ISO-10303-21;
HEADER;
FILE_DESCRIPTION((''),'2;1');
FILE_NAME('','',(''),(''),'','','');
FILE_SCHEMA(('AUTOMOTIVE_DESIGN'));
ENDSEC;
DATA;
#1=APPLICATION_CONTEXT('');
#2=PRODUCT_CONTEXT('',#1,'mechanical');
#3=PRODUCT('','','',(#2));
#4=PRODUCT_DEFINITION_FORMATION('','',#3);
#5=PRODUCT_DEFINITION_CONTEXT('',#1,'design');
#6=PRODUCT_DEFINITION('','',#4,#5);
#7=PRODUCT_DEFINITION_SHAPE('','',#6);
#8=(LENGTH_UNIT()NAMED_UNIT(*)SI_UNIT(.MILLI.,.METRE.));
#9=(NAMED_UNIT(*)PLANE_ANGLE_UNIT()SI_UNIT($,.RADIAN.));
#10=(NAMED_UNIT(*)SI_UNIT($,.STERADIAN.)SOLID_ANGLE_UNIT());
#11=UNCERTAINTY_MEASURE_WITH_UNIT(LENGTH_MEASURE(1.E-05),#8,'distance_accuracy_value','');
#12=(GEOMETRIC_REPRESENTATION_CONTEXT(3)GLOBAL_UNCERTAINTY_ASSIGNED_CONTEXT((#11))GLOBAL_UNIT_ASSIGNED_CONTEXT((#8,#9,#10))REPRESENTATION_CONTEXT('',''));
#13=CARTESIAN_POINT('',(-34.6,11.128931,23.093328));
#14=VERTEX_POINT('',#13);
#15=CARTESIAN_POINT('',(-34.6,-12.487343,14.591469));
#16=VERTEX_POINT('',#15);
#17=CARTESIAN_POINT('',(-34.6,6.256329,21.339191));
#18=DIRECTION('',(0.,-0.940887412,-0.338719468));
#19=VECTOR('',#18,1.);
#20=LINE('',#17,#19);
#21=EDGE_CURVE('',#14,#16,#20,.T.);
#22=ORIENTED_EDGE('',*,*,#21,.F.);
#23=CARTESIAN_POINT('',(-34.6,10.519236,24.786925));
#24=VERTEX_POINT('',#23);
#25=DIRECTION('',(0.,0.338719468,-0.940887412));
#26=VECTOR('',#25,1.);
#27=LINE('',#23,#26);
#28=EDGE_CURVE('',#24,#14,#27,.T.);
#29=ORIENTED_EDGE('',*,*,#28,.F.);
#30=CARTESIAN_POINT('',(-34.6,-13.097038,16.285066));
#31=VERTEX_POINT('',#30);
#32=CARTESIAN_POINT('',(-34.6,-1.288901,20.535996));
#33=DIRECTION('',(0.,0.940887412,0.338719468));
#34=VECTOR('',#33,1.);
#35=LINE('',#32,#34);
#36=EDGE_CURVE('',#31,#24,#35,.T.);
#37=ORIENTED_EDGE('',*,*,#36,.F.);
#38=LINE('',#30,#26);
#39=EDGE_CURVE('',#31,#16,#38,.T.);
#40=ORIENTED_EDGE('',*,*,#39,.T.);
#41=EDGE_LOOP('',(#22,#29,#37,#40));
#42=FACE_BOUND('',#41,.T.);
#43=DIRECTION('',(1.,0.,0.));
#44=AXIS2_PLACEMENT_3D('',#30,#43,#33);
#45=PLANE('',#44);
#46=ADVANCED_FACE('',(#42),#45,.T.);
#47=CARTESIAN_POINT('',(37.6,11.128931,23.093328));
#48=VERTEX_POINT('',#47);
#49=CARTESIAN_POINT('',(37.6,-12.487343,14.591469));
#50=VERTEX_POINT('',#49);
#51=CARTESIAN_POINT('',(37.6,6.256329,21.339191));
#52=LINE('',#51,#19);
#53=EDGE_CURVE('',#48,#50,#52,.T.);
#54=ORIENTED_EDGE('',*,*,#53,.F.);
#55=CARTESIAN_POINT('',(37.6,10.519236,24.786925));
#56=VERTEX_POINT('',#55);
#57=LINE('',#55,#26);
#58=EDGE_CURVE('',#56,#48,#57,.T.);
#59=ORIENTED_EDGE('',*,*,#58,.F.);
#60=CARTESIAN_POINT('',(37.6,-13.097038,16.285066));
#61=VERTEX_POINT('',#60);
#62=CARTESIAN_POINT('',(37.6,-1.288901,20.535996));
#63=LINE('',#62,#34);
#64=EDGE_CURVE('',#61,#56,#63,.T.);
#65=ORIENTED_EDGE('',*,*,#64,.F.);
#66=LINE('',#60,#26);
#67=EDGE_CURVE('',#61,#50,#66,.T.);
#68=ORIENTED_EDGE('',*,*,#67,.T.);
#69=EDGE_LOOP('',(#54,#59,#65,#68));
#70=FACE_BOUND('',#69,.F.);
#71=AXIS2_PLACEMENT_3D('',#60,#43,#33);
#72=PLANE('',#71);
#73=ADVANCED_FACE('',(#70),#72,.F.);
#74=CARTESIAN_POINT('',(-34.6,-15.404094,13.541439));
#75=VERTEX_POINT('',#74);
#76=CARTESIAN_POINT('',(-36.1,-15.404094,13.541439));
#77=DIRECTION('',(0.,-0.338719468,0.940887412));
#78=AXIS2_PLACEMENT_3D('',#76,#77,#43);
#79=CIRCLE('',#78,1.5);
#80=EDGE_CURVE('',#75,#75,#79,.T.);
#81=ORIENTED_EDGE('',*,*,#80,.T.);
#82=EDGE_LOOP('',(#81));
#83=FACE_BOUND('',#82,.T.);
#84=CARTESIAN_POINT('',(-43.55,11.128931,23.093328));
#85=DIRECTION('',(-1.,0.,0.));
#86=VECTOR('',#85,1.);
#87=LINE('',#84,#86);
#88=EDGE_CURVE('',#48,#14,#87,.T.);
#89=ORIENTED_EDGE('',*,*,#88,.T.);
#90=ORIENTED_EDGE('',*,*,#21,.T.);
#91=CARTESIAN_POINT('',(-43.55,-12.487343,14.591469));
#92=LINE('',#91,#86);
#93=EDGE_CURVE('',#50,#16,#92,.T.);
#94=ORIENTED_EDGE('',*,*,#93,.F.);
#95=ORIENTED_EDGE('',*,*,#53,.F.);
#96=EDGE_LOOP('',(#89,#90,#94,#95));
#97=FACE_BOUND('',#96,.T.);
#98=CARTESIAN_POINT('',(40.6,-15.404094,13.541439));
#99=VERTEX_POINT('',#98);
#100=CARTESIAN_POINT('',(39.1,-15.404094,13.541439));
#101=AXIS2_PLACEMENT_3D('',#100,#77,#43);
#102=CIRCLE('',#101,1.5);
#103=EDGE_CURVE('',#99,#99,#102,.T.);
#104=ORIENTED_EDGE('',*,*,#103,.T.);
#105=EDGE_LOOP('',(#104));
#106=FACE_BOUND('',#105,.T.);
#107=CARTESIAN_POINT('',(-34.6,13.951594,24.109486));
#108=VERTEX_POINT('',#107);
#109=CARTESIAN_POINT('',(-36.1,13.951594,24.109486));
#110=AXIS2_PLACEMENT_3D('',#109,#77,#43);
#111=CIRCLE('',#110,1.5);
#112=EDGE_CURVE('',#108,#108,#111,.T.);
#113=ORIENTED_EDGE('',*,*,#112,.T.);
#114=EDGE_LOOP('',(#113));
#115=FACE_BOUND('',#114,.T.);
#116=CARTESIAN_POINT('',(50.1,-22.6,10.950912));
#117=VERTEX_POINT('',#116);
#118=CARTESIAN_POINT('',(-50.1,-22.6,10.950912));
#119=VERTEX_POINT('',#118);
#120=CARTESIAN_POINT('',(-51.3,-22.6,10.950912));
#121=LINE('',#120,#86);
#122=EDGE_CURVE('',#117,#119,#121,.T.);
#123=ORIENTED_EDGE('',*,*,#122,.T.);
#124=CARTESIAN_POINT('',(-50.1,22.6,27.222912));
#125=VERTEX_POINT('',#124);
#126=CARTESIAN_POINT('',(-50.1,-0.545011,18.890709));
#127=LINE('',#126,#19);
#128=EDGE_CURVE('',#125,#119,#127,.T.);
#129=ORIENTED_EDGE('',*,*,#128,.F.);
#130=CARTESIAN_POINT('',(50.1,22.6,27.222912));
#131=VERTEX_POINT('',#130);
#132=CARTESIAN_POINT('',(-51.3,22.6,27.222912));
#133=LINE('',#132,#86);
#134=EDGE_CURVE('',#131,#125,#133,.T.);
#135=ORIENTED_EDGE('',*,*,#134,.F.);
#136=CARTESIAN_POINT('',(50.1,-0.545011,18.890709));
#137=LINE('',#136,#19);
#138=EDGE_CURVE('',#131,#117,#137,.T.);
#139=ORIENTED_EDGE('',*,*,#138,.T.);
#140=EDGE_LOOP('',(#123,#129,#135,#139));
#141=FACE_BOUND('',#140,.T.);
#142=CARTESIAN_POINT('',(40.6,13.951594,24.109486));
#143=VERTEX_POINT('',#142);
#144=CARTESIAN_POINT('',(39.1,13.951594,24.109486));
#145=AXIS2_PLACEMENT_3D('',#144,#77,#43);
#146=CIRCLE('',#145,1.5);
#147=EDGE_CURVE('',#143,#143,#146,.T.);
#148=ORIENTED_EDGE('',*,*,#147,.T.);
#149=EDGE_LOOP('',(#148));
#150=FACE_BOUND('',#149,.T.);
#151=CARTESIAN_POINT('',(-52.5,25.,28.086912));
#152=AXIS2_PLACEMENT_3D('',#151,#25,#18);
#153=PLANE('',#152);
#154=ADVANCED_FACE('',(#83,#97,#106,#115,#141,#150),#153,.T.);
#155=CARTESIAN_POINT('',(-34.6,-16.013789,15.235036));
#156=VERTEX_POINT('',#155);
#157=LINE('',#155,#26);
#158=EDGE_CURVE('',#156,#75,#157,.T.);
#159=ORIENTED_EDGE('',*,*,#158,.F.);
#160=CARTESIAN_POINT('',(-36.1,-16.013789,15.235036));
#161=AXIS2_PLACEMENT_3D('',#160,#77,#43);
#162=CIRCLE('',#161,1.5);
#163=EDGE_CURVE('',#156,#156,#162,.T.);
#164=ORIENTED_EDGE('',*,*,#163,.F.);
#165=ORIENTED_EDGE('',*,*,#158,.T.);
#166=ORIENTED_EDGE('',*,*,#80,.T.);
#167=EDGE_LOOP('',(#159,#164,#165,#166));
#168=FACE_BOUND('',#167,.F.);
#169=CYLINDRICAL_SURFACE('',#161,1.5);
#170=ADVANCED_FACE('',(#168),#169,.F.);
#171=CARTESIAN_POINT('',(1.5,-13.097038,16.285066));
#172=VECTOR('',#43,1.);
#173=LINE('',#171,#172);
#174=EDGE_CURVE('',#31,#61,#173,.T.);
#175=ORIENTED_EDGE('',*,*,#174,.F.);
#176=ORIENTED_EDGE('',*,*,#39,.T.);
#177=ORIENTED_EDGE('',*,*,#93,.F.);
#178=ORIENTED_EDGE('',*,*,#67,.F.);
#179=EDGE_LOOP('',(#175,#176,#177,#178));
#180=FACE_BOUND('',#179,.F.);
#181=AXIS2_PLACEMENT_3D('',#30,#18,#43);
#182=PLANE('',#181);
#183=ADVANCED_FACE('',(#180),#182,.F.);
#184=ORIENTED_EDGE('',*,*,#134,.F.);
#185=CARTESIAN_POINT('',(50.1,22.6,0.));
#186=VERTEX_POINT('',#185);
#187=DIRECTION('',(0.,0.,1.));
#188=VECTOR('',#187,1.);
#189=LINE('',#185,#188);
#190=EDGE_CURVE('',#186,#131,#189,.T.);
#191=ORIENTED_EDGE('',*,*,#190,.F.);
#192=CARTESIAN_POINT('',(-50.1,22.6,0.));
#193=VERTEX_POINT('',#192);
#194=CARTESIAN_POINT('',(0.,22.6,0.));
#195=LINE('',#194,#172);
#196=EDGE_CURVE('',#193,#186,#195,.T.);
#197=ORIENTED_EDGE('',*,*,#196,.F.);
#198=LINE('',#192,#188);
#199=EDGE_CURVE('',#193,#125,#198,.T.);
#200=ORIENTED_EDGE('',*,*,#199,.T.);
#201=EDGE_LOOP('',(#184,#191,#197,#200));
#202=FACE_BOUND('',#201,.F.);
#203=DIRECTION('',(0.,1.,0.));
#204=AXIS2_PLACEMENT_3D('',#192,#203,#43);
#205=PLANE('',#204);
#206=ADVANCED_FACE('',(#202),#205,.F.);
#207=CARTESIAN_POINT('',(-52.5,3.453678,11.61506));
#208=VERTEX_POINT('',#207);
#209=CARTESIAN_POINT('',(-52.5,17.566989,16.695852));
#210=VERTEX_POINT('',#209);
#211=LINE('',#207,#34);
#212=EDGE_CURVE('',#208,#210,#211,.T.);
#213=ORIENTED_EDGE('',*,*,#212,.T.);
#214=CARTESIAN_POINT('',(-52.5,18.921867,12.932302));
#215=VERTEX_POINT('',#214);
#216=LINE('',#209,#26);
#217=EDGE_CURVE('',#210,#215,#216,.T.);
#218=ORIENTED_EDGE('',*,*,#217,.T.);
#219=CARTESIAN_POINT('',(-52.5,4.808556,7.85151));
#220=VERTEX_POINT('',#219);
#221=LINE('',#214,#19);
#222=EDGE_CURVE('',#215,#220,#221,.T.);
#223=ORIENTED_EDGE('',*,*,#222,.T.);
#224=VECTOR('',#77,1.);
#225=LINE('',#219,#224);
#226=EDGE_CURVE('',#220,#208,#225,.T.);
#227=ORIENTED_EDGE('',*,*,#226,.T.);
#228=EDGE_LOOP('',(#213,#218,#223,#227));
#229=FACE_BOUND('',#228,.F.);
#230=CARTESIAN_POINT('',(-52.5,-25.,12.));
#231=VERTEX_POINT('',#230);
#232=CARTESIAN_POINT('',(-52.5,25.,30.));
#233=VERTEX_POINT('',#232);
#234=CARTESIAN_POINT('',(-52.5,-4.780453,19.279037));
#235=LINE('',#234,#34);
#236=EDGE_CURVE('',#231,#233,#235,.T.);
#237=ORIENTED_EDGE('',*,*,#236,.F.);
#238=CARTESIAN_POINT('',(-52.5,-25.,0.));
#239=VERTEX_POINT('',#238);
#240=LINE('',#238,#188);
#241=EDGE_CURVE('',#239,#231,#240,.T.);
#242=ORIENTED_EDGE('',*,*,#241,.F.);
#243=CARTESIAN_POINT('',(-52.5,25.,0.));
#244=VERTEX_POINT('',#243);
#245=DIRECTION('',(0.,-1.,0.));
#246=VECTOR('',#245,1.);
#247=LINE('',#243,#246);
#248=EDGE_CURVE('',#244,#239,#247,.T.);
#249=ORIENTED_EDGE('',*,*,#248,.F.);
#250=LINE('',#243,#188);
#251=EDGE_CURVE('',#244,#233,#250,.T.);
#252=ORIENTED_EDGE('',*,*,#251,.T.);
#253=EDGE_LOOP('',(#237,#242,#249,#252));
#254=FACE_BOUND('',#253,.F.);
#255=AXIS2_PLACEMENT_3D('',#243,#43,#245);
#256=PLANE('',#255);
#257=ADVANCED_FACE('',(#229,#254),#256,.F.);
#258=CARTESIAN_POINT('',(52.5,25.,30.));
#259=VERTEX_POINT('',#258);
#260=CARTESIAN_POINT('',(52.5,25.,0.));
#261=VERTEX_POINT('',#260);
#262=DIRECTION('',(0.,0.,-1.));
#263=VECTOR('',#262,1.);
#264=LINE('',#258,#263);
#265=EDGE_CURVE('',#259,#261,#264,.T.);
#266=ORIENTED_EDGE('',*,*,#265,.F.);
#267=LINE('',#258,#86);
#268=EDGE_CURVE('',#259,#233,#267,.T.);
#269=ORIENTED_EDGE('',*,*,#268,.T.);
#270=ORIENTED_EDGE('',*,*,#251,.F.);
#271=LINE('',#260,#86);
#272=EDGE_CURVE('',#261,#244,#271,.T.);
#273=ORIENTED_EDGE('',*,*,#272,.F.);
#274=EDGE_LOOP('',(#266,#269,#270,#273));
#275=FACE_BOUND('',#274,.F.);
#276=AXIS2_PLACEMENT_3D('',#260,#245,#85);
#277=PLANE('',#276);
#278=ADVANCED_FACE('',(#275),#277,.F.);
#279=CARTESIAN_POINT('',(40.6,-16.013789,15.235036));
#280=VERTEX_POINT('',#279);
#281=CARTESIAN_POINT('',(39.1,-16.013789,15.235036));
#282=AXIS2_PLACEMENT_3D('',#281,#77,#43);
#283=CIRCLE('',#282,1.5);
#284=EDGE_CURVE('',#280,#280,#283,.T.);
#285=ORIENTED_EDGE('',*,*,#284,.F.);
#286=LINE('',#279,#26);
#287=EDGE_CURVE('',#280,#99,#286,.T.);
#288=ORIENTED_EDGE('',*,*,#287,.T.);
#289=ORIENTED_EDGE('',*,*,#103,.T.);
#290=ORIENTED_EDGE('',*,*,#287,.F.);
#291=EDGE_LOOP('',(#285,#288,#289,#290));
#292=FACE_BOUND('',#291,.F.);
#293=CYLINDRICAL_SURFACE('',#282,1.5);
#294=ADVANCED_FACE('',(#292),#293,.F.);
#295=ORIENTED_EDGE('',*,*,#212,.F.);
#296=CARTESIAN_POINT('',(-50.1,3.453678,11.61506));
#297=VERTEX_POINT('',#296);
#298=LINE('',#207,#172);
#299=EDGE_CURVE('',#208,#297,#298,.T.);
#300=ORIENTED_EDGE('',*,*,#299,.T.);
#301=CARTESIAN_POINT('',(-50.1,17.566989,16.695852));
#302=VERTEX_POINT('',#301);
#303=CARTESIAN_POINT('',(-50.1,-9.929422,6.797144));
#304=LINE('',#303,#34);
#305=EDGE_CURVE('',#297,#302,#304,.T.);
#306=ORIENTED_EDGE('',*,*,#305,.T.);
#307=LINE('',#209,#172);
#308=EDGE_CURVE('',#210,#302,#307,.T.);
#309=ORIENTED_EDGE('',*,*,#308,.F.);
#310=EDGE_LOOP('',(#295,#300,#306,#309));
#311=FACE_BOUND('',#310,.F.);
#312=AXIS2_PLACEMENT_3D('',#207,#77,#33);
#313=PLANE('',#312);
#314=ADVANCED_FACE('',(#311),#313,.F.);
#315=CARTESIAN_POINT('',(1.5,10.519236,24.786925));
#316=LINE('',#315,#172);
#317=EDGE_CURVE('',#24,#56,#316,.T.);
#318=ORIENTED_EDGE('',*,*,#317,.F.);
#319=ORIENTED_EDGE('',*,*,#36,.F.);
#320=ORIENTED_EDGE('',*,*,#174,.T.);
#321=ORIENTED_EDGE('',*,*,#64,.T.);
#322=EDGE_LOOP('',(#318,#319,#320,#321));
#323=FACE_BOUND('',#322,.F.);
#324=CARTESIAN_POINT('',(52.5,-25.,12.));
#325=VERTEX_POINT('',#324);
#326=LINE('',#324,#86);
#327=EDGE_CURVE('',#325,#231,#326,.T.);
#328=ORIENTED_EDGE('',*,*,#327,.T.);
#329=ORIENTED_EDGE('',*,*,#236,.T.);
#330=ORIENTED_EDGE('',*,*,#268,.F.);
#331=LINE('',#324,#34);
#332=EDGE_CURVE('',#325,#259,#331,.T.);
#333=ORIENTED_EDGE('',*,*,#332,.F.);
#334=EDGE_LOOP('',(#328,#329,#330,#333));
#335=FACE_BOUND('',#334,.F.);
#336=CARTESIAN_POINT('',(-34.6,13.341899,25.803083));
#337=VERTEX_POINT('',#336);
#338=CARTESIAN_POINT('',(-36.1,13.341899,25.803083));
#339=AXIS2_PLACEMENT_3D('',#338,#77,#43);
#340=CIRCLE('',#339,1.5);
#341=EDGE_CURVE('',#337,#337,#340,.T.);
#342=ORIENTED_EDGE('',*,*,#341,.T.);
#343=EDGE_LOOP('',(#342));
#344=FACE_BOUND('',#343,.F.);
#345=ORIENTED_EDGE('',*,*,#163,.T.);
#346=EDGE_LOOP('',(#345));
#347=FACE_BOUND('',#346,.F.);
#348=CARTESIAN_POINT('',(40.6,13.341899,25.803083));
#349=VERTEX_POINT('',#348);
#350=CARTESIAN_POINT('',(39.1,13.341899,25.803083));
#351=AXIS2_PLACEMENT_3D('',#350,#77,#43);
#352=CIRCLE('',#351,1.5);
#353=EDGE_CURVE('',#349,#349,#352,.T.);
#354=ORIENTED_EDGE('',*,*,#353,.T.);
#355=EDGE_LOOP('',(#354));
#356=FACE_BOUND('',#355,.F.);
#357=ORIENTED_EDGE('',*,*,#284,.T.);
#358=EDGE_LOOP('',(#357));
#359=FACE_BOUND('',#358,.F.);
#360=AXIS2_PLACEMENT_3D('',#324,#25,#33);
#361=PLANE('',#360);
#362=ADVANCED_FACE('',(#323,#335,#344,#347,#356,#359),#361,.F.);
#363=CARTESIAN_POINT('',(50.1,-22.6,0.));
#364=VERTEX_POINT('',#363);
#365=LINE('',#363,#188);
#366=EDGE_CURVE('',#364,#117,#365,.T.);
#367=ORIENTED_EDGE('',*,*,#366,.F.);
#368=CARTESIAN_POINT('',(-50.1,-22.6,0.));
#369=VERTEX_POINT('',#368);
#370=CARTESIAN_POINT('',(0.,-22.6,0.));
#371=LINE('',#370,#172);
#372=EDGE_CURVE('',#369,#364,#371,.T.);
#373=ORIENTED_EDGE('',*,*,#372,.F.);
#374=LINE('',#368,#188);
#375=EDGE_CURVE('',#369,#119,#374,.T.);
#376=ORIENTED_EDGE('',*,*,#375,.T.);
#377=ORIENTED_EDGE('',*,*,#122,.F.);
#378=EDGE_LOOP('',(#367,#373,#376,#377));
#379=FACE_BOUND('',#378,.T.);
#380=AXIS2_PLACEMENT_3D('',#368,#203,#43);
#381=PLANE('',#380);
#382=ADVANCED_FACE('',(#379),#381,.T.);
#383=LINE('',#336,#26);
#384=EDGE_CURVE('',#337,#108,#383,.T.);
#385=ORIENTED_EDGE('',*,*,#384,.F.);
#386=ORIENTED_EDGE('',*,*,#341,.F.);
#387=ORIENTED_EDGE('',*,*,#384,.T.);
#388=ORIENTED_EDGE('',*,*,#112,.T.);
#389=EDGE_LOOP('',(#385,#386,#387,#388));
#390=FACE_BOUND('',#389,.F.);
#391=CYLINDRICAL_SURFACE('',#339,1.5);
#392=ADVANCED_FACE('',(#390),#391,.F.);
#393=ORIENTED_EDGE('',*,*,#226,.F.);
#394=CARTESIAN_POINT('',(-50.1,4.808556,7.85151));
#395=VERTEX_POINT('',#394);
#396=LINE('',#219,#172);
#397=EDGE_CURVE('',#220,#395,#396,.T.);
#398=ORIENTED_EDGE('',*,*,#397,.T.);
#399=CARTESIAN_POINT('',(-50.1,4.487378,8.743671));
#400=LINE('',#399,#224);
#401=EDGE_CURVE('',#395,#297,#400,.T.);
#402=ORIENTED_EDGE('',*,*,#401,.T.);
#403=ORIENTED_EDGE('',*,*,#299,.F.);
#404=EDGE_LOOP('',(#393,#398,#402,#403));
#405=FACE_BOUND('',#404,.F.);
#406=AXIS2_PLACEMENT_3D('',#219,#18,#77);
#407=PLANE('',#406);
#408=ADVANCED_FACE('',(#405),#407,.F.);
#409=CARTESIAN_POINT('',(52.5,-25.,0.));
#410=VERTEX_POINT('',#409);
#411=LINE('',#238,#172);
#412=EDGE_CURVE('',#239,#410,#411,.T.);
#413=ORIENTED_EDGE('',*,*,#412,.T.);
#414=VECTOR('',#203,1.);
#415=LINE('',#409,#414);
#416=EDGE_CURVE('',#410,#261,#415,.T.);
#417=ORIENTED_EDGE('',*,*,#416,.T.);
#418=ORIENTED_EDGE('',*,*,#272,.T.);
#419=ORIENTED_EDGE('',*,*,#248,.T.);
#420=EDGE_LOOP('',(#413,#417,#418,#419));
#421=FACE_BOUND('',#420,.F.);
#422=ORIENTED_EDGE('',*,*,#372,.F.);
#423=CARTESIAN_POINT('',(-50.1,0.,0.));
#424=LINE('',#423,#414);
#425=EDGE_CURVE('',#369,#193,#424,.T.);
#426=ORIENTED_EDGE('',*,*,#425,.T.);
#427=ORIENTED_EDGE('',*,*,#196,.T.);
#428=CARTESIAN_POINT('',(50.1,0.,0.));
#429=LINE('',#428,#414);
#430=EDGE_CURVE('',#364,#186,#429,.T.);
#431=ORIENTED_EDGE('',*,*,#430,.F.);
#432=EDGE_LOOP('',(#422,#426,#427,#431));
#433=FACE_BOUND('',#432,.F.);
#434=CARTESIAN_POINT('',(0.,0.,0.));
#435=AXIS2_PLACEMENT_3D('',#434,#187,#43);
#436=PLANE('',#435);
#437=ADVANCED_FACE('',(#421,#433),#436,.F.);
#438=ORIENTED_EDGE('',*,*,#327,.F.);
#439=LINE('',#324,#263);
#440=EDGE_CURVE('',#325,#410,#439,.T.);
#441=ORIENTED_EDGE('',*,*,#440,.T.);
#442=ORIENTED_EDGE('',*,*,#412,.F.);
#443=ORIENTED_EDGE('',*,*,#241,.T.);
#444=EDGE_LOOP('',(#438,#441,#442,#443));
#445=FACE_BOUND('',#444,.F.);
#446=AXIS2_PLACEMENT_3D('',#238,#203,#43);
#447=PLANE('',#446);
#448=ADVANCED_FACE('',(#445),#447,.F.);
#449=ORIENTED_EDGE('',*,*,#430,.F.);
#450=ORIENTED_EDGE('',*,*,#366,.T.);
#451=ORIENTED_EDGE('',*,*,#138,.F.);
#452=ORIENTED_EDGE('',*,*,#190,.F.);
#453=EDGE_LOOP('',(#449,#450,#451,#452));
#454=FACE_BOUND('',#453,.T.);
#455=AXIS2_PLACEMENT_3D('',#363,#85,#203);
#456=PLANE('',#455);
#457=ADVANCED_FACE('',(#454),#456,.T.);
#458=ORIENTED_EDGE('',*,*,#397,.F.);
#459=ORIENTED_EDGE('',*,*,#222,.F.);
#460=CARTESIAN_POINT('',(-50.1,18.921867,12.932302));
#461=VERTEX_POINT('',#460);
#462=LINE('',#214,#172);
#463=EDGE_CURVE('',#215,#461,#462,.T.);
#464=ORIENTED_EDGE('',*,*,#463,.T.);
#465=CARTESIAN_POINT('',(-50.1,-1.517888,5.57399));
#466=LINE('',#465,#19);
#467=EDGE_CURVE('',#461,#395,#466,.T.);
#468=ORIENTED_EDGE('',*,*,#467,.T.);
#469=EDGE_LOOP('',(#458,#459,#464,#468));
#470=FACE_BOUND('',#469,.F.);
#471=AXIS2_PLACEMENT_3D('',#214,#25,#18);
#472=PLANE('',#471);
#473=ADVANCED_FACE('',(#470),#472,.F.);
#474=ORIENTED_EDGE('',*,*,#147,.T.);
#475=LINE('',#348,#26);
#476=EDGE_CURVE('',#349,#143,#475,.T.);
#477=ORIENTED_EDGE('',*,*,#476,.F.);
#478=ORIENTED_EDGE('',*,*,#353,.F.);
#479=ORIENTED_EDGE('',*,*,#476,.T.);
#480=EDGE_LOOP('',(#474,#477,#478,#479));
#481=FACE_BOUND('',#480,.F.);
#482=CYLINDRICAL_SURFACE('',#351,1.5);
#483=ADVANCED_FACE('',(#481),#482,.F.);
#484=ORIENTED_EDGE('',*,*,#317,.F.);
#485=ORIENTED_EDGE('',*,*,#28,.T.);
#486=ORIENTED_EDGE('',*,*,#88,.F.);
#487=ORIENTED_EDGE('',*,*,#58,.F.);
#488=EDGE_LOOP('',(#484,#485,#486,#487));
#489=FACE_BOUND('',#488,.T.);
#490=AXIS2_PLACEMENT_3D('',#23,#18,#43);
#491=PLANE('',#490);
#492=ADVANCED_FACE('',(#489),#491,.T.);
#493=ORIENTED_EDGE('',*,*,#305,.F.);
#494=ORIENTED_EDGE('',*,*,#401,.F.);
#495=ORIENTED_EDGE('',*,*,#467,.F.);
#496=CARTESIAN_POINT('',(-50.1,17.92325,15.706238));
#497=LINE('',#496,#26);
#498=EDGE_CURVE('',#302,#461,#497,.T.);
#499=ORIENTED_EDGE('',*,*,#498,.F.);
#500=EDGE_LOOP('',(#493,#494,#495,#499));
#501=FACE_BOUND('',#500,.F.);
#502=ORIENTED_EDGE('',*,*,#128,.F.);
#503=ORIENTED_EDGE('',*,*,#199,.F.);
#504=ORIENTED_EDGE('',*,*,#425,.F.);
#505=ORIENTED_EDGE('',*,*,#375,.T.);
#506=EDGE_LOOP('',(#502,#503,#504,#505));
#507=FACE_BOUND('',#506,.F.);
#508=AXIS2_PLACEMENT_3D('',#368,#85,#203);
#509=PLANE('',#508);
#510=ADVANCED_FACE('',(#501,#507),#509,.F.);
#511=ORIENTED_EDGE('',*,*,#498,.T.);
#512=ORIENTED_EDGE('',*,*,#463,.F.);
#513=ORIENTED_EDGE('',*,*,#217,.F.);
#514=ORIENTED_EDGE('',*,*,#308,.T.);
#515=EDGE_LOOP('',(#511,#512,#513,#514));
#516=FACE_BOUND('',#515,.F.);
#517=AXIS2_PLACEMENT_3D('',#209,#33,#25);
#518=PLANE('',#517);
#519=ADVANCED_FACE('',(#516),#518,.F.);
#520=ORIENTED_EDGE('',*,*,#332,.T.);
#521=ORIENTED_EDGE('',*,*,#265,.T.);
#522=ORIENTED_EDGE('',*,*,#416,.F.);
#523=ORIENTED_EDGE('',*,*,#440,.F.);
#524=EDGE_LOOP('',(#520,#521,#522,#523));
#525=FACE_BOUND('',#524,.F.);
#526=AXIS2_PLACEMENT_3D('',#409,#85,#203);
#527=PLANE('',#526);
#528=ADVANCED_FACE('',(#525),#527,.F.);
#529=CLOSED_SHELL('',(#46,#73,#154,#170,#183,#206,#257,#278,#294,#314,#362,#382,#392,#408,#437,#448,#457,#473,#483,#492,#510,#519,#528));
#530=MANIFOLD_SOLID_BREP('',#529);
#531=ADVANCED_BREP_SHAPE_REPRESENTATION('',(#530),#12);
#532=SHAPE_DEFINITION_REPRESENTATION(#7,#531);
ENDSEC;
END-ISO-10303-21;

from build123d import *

# Parameters (mm, degrees)
F0_W     = 100.2
F0_H     = 45.2
F1_DEPTH = 30
F3_DEPTH = 105.001
F6_DEPTH = 105
F4_W     = 72.2
F4_H     = 25.1
F4_R     = 1.5
F7_DEPTH = 5
F8_DEPTH = 5


with BuildPart() as f1:
    # F0 (on Top) → F1 (new body)
    with BuildSketch(Plane.XY):
        Polygon((52.5, 25), (-52.5, 25), (-52.5, 4), (-52.5, -4), (-52.5, -25), (52.5, -25), (52.5, -4), (52.5, 4), align=None)
        Rectangle(F0_W, F0_H, mode=Mode.SUBTRACT)
    extrude(amount=F1_DEPTH)

    # F2 (on face) → F3 (cut, through all)
    with BuildSketch(Plane.YZ.offset(52.5)):
        Polygon((-25, 12), (25, 30), (-25, 30), align=None)
    extrude(amount=-F3_DEPTH, mode=Mode.SUBTRACT)

    # F5 (on face) → F6 (join)
    with BuildSketch(Plane(origin=(-52.5, 0, 0), x_dir=(0, -1, 0), z_dir=(-1, 0, 0))):
        Polygon((25, 12), (-25, 30), (-25, 28.0869124432), (25, 10.0869124432), align=None)
    extrude(amount=-F6_DEPTH)

    # F4 (on face) → F7 (cut)
    with BuildSketch(Plane(origin=(0, -6.6926345609, 18.5906515581), x_dir=(1, 0, 0), z_dir=(0, -0.3387194683, 0.9408874119))):
        with Locations((1.5, 5.7432311296)):
            Rectangle(F4_W, F4_H)
        with Locations((39.1, -9.9067688704)):
            Circle(F4_R)
        with Locations((39.1, 21.2932311296)):
            Circle(F4_R)
        with Locations((-36.1, -9.9067688704)):
            Circle(F4_R)
        with Locations((-36.1, 21.2932311296)):
            Circle(F4_R)
    extrude(amount=-F7_DEPTH, mode=Mode.SUBTRACT)

    # F5 (on face) → F8 (cut)
    with BuildSketch(Plane(origin=(-52.5, 0, 0), x_dir=(0, -1, 0), z_dir=(-1, 0, 0))):
        Polygon((-3.4536782682, 11.6150599721), (-17.5669894462, 16.6958519962), (-18.9218673193, 12.9323023487), (-4.8085561413, 7.8515103246), align=None)
    extrude(amount=-F8_DEPTH, mode=Mode.SUBTRACT)


solid = f1.part
